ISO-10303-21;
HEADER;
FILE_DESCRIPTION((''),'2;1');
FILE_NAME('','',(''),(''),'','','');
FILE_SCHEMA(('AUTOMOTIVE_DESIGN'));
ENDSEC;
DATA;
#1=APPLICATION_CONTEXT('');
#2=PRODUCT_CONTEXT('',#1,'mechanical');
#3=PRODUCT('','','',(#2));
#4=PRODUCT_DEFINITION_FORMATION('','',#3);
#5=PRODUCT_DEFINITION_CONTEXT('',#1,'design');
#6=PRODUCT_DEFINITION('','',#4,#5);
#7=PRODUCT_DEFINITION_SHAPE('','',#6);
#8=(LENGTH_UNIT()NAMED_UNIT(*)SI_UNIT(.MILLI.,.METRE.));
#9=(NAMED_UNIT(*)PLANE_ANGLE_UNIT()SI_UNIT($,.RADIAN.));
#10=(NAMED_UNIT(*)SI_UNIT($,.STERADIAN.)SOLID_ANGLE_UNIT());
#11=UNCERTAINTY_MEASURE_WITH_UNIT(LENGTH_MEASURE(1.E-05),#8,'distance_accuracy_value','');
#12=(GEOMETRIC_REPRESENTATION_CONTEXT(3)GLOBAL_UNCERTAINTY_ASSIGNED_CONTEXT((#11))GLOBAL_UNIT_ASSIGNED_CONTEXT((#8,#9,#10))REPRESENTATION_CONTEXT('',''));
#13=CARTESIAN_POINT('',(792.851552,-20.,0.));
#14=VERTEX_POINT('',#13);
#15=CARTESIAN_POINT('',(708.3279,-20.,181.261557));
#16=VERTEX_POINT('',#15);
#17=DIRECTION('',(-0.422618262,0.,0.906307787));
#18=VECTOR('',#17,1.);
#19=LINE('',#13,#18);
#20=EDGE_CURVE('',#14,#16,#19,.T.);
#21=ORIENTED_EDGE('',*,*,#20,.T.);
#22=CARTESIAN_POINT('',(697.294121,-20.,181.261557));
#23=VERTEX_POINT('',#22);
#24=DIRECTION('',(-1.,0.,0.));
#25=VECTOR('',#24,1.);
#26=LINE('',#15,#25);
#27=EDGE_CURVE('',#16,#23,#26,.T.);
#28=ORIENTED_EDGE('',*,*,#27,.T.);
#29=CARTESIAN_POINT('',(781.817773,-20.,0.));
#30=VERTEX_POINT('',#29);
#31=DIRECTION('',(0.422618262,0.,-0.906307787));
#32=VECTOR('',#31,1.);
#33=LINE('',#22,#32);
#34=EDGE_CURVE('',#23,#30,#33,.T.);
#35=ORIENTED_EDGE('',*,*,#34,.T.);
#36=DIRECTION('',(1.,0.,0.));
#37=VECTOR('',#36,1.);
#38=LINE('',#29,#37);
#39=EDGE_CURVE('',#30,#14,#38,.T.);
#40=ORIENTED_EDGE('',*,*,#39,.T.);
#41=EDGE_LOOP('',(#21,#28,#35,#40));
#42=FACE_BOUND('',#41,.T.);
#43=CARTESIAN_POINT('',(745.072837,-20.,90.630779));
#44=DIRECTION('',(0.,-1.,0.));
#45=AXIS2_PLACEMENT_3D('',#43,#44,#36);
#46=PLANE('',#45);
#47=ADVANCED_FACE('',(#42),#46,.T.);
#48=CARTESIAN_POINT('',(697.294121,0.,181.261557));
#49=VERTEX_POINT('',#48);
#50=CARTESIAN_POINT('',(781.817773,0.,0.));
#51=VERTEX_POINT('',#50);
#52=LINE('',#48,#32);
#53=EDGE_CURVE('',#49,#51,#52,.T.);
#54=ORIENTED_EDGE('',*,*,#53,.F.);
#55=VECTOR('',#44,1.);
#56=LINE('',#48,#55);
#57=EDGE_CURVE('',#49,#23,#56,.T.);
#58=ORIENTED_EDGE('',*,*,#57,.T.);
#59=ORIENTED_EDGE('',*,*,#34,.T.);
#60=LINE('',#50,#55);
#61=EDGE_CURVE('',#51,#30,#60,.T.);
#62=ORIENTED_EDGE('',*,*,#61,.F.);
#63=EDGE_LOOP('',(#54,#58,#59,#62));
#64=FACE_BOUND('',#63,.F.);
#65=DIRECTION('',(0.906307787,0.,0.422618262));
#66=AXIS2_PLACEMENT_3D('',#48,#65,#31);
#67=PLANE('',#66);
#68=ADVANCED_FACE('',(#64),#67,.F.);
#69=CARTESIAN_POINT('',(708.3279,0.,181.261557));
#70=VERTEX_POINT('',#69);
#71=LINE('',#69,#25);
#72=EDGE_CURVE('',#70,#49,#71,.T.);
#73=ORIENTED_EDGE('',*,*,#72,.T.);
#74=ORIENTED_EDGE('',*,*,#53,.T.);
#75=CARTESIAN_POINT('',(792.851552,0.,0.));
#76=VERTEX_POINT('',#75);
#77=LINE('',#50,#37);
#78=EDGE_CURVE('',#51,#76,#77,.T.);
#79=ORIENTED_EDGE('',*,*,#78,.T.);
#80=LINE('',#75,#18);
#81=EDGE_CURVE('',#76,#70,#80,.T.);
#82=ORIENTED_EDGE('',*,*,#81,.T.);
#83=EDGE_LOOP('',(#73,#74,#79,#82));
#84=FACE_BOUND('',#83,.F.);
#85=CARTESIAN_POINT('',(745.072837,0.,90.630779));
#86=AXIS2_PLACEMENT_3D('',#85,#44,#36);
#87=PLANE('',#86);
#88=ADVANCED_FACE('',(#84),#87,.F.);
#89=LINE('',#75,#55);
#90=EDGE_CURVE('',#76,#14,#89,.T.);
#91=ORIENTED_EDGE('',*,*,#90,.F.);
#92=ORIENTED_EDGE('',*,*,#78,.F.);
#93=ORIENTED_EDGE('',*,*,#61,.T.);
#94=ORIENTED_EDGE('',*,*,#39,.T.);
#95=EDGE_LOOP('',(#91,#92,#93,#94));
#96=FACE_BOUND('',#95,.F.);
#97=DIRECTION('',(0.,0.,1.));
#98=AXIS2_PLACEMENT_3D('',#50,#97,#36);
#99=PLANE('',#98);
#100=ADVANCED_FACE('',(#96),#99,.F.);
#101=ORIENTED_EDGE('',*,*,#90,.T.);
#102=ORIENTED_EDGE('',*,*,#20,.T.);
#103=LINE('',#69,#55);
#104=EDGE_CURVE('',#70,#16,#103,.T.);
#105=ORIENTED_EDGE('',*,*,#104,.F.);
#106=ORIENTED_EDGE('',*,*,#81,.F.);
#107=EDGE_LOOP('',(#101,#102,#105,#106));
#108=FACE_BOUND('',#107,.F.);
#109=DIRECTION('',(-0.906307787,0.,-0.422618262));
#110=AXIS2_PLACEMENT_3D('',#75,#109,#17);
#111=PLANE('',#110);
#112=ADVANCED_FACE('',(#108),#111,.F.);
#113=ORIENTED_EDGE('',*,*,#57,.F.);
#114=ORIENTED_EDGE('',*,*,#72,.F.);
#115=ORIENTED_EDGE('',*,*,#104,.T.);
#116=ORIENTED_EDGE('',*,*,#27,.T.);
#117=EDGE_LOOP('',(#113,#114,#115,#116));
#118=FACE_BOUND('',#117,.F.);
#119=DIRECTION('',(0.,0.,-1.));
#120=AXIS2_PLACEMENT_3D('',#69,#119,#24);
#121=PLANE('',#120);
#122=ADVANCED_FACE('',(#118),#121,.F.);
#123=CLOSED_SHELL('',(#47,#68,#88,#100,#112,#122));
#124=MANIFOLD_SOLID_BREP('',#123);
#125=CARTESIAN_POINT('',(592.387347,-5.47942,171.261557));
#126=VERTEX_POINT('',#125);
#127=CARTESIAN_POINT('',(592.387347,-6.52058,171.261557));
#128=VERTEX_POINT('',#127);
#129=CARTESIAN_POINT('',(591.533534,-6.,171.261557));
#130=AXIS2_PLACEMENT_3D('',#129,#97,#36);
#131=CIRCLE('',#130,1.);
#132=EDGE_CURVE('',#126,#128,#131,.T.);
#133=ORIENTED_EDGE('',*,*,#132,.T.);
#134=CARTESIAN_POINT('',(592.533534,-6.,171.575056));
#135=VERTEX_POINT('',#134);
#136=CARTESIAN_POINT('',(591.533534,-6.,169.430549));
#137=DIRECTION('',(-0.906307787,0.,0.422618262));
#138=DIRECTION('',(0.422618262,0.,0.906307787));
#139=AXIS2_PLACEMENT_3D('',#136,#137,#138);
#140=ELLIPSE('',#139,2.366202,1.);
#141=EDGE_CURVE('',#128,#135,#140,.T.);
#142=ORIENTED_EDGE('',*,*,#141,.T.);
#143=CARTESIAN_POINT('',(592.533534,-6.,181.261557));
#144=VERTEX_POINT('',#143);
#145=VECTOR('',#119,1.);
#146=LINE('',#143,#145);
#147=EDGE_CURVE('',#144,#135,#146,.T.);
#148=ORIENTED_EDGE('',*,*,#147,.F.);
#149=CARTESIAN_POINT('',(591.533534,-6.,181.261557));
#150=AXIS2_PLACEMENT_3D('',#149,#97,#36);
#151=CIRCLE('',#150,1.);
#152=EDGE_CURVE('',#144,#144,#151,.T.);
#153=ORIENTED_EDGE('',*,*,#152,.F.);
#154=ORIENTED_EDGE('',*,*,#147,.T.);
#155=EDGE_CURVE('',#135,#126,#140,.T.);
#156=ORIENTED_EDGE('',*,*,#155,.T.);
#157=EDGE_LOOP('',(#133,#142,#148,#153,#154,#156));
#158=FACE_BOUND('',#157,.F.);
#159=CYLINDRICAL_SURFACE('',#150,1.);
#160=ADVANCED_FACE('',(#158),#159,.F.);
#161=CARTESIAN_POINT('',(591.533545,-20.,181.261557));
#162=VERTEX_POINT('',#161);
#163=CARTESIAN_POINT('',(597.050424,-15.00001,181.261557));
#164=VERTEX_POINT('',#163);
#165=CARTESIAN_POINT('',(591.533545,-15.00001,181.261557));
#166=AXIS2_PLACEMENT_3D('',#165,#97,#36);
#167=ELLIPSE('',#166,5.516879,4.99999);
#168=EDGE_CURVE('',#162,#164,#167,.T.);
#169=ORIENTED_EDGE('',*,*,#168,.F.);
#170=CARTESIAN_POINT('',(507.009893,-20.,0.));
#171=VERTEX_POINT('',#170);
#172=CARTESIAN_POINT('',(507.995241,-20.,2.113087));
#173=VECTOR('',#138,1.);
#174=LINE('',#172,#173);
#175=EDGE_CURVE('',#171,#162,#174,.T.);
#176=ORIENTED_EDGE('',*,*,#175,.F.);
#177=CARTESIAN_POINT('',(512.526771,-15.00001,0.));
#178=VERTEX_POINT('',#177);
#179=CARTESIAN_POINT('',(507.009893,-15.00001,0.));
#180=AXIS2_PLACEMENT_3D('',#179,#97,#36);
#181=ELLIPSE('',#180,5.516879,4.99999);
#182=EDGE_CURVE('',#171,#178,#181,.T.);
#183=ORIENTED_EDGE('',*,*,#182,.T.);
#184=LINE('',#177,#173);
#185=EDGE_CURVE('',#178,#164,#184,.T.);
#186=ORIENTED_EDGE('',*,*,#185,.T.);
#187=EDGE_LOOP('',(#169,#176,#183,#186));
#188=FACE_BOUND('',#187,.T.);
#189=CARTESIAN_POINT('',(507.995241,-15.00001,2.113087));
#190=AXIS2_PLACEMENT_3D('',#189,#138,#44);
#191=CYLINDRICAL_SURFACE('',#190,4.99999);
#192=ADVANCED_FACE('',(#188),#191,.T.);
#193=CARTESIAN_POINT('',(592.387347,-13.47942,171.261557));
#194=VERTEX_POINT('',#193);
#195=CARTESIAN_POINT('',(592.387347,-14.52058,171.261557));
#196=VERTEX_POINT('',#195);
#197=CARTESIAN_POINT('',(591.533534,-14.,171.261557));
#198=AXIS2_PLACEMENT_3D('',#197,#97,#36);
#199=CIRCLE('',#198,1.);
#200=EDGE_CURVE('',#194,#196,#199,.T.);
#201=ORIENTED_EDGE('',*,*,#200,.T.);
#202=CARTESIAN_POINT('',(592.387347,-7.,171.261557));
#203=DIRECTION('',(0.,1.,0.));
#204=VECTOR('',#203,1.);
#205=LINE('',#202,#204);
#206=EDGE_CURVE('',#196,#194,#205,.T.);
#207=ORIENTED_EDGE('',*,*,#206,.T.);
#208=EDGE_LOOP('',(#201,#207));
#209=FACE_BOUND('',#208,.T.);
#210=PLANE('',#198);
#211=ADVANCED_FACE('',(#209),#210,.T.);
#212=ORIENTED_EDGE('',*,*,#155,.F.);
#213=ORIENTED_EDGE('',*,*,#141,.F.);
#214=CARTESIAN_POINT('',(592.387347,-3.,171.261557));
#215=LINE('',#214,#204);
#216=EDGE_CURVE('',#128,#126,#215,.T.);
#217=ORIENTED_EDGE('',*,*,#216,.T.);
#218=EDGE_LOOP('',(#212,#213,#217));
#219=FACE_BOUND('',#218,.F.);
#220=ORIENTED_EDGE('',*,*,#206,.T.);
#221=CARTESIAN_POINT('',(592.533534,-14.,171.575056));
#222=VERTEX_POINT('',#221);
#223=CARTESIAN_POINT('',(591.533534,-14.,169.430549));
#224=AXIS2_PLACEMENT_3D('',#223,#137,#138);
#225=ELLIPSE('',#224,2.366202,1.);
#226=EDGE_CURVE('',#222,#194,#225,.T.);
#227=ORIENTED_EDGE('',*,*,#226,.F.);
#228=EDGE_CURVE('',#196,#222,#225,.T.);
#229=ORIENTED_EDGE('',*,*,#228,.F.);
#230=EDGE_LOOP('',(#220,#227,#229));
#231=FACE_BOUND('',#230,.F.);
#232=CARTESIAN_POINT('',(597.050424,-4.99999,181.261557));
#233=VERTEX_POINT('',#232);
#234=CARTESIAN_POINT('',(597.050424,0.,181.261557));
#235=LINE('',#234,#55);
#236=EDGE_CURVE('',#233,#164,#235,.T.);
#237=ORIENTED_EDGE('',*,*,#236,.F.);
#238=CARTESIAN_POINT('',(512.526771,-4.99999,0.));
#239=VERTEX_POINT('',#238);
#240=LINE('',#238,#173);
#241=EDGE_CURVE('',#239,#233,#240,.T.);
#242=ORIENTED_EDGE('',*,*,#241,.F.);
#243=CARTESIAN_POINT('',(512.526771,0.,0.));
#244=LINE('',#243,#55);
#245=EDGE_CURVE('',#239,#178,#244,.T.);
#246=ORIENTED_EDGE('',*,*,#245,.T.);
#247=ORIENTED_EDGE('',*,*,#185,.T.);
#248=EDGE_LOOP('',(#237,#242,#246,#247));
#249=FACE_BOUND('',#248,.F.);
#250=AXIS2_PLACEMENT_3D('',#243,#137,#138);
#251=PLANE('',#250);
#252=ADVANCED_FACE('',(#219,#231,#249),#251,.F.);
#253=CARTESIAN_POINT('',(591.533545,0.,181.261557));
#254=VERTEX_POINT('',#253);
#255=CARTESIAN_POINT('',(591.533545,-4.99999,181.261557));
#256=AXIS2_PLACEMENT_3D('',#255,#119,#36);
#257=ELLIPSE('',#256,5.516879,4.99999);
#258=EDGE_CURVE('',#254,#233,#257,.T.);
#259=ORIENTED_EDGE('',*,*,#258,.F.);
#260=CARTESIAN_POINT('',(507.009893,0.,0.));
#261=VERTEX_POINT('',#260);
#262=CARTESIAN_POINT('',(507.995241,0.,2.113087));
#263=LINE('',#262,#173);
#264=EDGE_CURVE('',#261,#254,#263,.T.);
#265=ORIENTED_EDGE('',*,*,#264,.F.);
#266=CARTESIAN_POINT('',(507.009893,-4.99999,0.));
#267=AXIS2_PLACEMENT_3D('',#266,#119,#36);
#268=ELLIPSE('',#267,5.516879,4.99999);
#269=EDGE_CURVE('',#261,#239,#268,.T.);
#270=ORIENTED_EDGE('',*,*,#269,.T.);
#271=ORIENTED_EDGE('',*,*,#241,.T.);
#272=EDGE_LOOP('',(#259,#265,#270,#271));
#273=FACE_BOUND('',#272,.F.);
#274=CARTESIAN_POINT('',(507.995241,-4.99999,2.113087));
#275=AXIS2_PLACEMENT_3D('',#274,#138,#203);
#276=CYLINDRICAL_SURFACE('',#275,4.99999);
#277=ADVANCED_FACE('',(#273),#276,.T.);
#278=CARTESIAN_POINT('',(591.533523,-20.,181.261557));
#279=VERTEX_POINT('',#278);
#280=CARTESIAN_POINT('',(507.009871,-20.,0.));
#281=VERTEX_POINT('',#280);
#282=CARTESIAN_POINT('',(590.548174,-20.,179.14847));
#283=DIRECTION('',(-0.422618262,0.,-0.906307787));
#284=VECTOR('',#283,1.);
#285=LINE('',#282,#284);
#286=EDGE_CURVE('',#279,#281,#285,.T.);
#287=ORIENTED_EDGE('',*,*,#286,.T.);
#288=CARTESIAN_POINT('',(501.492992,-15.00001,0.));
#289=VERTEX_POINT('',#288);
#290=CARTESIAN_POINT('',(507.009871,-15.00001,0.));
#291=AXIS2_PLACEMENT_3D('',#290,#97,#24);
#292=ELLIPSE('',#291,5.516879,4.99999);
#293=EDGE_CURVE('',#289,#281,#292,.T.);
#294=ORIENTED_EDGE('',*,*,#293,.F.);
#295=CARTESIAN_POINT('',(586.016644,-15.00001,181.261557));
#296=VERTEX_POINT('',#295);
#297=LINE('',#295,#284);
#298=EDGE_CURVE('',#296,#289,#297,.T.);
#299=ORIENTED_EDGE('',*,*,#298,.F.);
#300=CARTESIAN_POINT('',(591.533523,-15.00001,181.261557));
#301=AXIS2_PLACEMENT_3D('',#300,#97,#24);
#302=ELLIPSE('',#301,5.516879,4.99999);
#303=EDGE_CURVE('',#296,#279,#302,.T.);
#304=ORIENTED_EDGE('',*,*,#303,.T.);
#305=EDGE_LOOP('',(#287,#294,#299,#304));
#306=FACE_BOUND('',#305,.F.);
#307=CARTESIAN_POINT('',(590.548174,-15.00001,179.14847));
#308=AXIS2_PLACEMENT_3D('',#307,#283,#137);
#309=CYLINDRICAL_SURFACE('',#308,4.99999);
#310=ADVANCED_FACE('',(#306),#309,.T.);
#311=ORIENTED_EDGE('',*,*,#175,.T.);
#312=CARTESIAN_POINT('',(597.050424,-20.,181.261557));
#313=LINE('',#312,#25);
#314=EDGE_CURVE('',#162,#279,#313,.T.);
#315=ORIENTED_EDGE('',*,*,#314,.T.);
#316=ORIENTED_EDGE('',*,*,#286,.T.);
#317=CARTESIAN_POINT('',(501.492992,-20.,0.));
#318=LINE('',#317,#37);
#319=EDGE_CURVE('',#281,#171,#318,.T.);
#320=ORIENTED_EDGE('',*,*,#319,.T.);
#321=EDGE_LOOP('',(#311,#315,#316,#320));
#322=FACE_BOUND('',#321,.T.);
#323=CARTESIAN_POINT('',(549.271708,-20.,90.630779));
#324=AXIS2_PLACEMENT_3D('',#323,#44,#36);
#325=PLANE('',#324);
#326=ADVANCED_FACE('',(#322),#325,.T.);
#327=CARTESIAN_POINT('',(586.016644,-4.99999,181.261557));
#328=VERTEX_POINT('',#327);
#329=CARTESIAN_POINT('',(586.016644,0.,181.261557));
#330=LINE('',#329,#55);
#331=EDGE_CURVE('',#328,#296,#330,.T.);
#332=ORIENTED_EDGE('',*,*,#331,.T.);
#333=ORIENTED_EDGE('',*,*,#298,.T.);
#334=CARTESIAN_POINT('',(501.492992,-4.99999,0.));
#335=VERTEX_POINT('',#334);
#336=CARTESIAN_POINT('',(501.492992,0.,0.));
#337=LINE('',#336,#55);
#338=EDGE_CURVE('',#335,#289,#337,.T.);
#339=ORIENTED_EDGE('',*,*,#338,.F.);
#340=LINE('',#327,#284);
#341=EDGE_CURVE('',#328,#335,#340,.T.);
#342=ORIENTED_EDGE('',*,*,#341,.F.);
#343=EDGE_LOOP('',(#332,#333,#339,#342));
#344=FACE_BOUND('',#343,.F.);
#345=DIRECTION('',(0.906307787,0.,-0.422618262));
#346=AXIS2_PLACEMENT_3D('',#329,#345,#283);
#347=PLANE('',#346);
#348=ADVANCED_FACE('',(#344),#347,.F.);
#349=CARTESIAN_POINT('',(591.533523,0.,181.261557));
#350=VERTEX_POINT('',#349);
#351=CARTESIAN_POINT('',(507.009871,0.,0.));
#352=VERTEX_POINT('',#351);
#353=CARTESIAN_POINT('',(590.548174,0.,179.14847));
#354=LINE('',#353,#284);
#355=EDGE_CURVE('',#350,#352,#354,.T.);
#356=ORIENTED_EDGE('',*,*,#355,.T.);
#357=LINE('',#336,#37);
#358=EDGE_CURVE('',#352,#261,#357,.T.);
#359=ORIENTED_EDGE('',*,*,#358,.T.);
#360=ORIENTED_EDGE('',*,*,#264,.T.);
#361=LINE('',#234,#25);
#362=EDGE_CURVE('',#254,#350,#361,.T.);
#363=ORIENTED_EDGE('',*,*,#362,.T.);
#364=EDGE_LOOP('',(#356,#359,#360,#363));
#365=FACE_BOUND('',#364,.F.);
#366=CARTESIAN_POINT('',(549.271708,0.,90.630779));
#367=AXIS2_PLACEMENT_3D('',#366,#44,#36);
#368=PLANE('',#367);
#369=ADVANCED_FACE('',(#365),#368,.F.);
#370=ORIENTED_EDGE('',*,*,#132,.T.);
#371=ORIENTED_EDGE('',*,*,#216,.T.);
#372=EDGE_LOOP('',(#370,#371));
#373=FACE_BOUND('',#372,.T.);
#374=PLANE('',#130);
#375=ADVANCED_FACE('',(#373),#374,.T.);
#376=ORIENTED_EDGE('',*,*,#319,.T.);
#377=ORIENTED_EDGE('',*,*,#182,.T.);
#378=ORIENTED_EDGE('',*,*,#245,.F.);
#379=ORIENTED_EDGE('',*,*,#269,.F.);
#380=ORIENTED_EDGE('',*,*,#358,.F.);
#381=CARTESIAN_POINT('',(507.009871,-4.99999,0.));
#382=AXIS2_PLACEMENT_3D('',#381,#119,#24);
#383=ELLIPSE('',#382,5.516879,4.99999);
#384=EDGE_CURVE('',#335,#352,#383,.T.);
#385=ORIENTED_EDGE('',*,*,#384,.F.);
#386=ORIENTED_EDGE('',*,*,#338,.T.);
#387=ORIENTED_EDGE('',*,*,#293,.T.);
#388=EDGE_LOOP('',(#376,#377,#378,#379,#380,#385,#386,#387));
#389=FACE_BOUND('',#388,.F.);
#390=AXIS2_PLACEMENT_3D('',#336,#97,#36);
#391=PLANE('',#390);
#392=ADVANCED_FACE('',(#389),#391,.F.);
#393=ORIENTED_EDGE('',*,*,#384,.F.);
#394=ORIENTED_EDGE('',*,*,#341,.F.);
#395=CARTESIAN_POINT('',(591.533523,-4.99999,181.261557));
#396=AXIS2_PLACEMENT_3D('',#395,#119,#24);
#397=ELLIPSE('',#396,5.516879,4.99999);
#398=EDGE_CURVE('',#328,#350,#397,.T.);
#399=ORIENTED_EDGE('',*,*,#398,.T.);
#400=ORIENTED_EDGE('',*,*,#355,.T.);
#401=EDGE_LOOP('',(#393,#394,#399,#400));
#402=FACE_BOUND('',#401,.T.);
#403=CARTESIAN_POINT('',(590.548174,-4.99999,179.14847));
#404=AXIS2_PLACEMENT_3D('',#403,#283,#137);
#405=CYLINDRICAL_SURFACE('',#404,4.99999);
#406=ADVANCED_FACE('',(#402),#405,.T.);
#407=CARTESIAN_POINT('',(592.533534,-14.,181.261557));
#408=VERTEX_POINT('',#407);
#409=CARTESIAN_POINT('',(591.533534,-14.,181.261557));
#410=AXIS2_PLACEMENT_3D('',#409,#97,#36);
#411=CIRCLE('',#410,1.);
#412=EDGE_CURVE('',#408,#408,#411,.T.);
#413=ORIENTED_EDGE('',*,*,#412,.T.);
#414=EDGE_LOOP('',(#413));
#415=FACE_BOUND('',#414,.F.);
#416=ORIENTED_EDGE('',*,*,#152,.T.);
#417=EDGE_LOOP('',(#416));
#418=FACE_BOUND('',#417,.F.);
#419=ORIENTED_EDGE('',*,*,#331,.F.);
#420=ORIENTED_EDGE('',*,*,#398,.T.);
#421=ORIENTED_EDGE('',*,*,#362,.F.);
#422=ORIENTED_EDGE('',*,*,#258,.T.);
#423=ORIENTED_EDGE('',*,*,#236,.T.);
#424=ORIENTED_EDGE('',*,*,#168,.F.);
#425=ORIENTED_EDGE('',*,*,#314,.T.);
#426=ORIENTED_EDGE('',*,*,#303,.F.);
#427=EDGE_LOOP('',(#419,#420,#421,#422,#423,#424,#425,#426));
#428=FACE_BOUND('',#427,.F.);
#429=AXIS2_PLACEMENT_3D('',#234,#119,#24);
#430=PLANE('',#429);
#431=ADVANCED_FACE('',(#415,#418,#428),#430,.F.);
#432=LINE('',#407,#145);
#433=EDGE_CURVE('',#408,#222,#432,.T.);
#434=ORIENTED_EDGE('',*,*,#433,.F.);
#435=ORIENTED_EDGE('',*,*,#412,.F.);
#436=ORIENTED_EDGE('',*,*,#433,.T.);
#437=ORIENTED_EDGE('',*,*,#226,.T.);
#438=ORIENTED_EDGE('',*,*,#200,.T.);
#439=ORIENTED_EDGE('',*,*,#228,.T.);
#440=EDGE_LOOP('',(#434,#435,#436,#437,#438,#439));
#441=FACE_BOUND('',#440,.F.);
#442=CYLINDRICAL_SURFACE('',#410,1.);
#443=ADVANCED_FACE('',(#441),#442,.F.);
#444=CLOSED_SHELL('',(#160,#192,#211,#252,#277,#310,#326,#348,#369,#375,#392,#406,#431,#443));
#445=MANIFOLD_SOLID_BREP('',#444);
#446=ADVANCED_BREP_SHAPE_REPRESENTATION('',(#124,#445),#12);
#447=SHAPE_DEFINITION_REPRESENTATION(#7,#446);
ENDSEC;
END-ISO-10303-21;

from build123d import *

# Parameters (mm, degrees)
F1_DEPTH = 20
F2_R     = 1
F3_DEPTH = 10
F4_R     = 4.99999


# Not quite as in the source:
# - a fillet or chamfer is up to 0.001 mm smaller than in the source, because OpenCascade refuses the exact size


with BuildPart() as f1:
    # F0 (on Front) → F1 (new body)
    with BuildSketch(Plane.XZ):
        Polygon((586.0166443916, 181.2615574073), (501.4929920435, 0), (512.5267712331, 0), (597.0504235813, 181.2615574073), align=None)
    extrude(amount=F1_DEPTH)

    # F2 (on face) → F3 (cut)
    with BuildSketch(Plane.XY.offset(181.2615574073)):
        with Locations((591.5335339864, -6)):
            Circle(F2_R)
        with Locations((591.5335339864, -14)):
            Circle(F2_R)
    extrude(amount=-F3_DEPTH, mode=Mode.SUBTRACT)

    # F4 (radius 5 in the source; OpenCascade refuses exactly that, so slightly less here)
    f4_edges = [f1.edges().sort_by_distance(p)[0] for p in [
        (543.754818, -20, 90.630779),
        (543.754818, 0, 90.630779),
        (554.788597, -20, 90.630779),
        (554.788597, 0, 90.630779),
    ]]
    fillet(f4_edges, radius=F4_R)


with BuildPart() as f1b:
    # F0 (on Front) → F1, piece 2 (new body)
    with BuildSketch(Plane.XZ):
        Polygon((781.8177731776, 0), (792.8515523672, 0), (708.3279000191, 181.2615574073), (697.2941208294, 181.2615574073), align=None)
    extrude(amount=F1_DEPTH)


solid = Compound([f1.part, f1b.part])
